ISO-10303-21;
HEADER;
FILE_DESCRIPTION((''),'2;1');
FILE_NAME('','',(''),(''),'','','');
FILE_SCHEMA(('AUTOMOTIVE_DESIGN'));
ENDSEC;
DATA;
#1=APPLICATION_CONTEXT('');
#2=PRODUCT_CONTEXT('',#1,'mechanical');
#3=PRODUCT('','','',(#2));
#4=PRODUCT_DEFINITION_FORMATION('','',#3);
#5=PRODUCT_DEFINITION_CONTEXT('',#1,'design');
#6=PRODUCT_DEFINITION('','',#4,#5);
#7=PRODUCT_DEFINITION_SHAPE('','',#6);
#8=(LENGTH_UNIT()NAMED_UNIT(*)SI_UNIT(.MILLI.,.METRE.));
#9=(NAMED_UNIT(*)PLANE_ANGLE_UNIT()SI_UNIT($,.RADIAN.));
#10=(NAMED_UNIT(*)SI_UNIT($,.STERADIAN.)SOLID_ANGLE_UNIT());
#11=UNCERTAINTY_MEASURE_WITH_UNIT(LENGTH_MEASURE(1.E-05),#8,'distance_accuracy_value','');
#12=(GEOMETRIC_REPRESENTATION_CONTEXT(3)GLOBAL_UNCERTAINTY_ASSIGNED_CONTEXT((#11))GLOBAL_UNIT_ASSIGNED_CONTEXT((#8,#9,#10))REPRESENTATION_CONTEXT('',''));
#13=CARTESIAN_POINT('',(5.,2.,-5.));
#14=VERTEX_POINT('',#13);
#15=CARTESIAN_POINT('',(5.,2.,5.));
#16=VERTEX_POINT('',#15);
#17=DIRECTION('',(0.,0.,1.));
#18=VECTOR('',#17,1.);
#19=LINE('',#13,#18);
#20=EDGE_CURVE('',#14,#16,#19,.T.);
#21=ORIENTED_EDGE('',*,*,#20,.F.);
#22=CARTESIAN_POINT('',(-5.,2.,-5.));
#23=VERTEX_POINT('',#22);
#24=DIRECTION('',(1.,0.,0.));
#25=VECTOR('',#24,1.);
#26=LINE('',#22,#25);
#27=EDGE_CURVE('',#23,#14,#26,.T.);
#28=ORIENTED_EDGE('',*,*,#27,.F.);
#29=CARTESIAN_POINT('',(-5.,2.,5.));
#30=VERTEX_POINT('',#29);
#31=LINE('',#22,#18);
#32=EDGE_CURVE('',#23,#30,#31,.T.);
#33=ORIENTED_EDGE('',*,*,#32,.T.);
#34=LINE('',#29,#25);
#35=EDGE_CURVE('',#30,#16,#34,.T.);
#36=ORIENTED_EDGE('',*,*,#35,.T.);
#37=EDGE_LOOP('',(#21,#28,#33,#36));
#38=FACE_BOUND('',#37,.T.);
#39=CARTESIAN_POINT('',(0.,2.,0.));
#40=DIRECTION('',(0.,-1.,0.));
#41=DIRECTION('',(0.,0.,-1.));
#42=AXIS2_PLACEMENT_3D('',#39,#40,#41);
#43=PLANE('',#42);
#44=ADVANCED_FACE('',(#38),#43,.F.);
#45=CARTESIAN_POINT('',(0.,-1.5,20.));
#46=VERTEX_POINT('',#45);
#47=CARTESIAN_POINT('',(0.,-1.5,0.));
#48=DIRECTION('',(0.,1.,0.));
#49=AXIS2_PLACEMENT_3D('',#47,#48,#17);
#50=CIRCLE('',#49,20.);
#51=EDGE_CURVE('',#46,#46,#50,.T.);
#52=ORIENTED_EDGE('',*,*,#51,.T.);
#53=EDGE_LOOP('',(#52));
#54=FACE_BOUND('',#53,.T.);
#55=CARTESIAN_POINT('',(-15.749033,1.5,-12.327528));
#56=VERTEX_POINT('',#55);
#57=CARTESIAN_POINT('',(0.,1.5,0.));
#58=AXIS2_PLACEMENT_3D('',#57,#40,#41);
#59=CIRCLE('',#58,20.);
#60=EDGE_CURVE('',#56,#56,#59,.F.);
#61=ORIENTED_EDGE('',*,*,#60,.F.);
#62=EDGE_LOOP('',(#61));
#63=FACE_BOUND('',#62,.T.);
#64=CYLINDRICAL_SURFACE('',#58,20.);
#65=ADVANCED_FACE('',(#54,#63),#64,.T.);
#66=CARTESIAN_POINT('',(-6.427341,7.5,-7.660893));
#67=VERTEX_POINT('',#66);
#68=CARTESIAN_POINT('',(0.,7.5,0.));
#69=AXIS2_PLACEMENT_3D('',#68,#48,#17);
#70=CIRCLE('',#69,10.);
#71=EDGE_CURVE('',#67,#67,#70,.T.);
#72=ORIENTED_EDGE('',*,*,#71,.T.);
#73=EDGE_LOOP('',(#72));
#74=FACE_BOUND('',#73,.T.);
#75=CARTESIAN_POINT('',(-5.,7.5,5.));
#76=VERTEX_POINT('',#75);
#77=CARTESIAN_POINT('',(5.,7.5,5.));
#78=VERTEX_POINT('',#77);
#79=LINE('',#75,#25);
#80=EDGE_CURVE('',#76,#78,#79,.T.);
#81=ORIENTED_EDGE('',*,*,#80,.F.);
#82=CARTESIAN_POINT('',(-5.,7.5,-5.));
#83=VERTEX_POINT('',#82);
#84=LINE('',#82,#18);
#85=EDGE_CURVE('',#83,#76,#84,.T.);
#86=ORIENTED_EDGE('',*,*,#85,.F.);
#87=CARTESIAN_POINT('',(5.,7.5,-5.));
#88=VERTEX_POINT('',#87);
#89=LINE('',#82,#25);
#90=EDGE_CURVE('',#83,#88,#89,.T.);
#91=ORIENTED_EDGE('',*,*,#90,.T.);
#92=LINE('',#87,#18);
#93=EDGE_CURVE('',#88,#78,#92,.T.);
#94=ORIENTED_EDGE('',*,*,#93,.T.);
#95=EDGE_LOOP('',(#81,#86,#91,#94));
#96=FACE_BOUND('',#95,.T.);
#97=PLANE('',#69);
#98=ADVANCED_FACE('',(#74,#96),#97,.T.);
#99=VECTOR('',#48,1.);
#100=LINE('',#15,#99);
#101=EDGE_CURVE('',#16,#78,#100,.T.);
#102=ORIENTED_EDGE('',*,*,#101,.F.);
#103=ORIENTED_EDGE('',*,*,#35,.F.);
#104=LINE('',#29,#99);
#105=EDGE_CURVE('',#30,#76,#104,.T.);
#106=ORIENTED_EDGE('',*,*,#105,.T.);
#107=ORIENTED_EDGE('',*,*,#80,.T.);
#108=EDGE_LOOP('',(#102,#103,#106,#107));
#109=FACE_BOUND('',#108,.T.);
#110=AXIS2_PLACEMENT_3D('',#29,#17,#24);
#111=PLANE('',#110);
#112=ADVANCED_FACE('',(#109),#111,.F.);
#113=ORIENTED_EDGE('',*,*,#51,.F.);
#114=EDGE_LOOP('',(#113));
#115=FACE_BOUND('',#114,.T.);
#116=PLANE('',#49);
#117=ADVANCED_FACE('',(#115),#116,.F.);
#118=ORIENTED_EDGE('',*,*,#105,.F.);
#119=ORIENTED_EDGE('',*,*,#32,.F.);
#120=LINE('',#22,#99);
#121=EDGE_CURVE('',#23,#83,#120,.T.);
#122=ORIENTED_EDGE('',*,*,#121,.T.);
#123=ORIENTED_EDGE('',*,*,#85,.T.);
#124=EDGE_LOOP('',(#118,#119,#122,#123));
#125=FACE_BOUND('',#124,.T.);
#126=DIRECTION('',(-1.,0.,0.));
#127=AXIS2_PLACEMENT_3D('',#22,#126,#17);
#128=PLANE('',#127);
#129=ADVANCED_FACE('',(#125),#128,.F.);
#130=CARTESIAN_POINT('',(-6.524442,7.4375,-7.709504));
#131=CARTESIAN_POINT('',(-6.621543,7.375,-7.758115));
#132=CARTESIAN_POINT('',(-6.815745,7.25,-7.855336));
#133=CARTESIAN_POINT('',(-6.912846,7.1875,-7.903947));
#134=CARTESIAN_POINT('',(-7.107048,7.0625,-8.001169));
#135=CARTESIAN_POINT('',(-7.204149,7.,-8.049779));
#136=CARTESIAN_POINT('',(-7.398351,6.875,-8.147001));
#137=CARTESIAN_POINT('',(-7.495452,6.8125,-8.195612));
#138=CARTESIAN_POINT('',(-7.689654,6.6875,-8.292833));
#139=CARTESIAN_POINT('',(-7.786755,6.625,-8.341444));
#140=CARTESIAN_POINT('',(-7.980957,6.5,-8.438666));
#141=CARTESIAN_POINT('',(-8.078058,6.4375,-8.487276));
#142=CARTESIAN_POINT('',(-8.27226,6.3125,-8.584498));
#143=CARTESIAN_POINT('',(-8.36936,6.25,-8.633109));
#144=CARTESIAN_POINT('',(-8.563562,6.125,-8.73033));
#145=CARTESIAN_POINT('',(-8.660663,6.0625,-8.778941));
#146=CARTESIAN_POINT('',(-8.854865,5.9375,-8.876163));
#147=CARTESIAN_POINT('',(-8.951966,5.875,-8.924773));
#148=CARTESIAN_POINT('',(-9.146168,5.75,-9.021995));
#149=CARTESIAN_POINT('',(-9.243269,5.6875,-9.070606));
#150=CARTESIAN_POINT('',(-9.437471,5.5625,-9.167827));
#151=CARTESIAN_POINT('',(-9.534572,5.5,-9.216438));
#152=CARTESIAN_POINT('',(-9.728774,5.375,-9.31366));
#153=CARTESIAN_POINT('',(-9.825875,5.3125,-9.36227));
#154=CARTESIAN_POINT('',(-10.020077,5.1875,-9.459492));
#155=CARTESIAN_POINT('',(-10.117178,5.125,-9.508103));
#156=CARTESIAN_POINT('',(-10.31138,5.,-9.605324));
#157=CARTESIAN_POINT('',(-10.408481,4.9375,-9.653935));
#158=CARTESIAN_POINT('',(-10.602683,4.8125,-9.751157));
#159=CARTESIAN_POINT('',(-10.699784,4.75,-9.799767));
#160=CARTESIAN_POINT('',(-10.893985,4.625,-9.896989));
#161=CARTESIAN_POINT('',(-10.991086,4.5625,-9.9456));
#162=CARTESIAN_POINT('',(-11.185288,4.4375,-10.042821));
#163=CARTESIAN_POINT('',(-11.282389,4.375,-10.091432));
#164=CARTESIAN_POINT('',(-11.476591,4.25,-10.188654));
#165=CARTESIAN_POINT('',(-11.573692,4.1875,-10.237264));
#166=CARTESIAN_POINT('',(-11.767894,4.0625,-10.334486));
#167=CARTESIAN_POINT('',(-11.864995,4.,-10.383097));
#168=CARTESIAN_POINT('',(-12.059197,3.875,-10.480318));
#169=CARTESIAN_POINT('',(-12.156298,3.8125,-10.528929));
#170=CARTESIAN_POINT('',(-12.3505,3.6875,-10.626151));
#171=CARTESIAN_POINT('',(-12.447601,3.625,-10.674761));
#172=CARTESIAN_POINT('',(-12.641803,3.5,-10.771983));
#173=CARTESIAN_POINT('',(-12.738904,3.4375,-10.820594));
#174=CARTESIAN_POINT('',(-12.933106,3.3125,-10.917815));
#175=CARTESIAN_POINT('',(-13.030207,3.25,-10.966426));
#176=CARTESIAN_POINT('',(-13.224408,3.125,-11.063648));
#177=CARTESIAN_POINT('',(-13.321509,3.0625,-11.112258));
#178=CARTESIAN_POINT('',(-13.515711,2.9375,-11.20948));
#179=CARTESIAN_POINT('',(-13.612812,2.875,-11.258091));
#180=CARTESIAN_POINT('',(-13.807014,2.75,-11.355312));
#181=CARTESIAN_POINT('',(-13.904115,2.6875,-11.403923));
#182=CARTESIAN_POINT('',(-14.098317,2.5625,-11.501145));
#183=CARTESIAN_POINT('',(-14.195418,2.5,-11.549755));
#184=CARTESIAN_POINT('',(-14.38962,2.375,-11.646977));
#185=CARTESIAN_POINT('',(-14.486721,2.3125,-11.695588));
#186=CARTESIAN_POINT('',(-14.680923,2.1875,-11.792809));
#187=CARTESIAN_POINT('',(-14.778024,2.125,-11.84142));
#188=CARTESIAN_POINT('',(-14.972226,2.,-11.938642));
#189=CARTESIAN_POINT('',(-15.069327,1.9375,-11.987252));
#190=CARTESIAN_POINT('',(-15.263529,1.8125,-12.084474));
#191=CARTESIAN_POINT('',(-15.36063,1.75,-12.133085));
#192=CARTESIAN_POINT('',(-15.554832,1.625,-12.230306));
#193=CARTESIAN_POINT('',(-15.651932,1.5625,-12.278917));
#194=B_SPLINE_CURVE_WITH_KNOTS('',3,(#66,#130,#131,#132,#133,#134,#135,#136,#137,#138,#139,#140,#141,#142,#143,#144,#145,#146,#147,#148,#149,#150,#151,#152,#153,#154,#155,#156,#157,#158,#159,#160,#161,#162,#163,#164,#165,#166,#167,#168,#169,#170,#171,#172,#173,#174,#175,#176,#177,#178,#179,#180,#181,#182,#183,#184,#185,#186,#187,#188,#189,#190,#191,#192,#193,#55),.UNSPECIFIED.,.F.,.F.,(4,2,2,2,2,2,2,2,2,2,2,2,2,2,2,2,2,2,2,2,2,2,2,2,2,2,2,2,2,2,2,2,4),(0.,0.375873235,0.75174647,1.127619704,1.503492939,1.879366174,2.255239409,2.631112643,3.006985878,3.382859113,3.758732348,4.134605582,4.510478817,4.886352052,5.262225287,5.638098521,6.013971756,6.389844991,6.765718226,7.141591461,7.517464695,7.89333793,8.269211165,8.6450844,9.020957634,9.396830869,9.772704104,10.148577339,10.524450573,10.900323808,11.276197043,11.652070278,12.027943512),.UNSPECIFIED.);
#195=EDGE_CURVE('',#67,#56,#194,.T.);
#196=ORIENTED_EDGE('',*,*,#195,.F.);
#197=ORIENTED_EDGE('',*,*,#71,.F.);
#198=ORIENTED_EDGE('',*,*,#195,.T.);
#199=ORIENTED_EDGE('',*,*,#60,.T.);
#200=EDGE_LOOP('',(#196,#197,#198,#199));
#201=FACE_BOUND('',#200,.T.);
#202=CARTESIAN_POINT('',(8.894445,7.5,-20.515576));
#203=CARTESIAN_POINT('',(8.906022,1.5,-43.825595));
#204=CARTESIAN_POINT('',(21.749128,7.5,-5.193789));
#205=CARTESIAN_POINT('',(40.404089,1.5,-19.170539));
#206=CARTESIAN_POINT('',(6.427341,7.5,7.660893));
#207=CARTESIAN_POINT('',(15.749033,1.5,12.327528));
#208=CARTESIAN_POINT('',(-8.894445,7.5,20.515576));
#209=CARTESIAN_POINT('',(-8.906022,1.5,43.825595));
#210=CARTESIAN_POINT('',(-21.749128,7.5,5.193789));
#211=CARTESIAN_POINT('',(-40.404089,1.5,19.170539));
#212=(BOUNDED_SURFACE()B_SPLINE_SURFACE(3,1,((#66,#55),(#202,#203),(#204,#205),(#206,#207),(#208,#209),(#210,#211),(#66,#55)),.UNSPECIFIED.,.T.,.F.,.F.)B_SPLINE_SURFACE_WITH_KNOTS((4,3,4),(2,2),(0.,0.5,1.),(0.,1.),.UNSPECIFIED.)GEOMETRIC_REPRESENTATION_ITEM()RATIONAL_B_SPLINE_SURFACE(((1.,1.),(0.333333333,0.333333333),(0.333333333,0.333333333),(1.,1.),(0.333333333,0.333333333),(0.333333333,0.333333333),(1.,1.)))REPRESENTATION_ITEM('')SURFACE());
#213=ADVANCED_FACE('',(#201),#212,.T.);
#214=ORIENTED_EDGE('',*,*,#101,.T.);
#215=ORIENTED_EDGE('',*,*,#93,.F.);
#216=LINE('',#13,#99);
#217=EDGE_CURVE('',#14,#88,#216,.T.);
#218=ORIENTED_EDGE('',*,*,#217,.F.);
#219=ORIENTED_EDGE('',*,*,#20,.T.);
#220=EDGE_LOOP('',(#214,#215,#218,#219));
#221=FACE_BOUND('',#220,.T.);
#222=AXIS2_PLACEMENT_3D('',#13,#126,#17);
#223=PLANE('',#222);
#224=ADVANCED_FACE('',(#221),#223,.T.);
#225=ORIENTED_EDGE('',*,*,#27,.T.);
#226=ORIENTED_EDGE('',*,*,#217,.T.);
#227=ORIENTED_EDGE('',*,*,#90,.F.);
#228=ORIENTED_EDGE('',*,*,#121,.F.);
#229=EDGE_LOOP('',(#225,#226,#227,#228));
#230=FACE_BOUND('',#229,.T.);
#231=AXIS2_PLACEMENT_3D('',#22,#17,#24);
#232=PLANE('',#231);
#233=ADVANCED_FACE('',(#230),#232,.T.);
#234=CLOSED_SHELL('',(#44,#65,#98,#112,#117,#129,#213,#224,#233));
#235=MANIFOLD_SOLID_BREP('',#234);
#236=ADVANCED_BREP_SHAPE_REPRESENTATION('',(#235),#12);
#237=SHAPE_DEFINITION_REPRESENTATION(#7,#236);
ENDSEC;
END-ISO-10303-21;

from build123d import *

# Parameters (mm, degrees)
SKETCH1_R           = 20
BOSS_EXTRUDE1_DEPTH = 1.5
SKETCH5_W           = 10
SKETCH5_H           = 10
CUT_EXTRUDE1_DEPTH  = 5.5


with BuildPart() as part:
    # Sketch1 → Boss-Extrude1 (new, symmetric)
    with BuildSketch(Plane(origin=(0, 0, 0), x_dir=(1, 0, 0), z_dir=(0, 1, 0))):
        with Locations(Location((0, 0, 0), (0, 0, 270))):
            Circle(SKETCH1_R)
    extrude(amount=BOSS_EXTRUDE1_DEPTH, both=True)

    # Loft1: read off the stored shape, not the designer's step
    # Loft1: loft between two sections, ruled curve by curve
    loft1_from = [
        Edge.make_bspline([(-6.427341281, 7.5, -7.660893163), (8.894445045, 7.5, -20.515575726), (21.749127607, 7.5, -5.1937894), (6.427341281, 7.5, 7.660893163), (-8.894445045, 7.5, 20.515575726), (-21.749127607, 7.5, 5.1937894), (-6.427341281, 7.5, -7.660893163)], [0, 0, 0, 0, 0.5, 0.5, 0.5, 1, 1, 1, 1], 3, [1, 0.333333333, 0.333333333, 1, 0.333333333, 0.333333333, 1]),
    ]
    loft1_to = [
        Edge.make_bspline([(-15.74903345, 1.5, -12.327527951), (8.906022452, 1.5, -43.825594852), (40.404089352, 1.5, -19.17053895), (15.74903345, 1.5, 12.327527951), (-8.906022452, 1.5, 43.825594852), (-40.404089352, 1.5, 19.17053895), (-15.74903345, 1.5, -12.327527951)], [0, 0, 0, 0, 0.5, 0.5, 0.5, 1, 1, 1, 1], 3, [1, 0.333333333, 0.333333333, 1, 0.333333333, 0.333333333, 1]),
    ]
    loft1 = Solid(Shell([*[Face.make_surface_from_curves(loft1_from[k], loft1_to[k]) for k in range(1)], Face(Wire(loft1_from)), Face(Wire(loft1_to))]))
    add(loft1)

    # Sketch5 → Cut-Extrude1 (cut)
    with BuildSketch(Plane(origin=(0, 7.5, 0), x_dir=(1, 0, 0), z_dir=(0, 1, 0))):
        Rectangle(SKETCH5_W, SKETCH5_H)
    extrude(amount=-CUT_EXTRUDE1_DEPTH, mode=Mode.SUBTRACT)


solid = part.part
